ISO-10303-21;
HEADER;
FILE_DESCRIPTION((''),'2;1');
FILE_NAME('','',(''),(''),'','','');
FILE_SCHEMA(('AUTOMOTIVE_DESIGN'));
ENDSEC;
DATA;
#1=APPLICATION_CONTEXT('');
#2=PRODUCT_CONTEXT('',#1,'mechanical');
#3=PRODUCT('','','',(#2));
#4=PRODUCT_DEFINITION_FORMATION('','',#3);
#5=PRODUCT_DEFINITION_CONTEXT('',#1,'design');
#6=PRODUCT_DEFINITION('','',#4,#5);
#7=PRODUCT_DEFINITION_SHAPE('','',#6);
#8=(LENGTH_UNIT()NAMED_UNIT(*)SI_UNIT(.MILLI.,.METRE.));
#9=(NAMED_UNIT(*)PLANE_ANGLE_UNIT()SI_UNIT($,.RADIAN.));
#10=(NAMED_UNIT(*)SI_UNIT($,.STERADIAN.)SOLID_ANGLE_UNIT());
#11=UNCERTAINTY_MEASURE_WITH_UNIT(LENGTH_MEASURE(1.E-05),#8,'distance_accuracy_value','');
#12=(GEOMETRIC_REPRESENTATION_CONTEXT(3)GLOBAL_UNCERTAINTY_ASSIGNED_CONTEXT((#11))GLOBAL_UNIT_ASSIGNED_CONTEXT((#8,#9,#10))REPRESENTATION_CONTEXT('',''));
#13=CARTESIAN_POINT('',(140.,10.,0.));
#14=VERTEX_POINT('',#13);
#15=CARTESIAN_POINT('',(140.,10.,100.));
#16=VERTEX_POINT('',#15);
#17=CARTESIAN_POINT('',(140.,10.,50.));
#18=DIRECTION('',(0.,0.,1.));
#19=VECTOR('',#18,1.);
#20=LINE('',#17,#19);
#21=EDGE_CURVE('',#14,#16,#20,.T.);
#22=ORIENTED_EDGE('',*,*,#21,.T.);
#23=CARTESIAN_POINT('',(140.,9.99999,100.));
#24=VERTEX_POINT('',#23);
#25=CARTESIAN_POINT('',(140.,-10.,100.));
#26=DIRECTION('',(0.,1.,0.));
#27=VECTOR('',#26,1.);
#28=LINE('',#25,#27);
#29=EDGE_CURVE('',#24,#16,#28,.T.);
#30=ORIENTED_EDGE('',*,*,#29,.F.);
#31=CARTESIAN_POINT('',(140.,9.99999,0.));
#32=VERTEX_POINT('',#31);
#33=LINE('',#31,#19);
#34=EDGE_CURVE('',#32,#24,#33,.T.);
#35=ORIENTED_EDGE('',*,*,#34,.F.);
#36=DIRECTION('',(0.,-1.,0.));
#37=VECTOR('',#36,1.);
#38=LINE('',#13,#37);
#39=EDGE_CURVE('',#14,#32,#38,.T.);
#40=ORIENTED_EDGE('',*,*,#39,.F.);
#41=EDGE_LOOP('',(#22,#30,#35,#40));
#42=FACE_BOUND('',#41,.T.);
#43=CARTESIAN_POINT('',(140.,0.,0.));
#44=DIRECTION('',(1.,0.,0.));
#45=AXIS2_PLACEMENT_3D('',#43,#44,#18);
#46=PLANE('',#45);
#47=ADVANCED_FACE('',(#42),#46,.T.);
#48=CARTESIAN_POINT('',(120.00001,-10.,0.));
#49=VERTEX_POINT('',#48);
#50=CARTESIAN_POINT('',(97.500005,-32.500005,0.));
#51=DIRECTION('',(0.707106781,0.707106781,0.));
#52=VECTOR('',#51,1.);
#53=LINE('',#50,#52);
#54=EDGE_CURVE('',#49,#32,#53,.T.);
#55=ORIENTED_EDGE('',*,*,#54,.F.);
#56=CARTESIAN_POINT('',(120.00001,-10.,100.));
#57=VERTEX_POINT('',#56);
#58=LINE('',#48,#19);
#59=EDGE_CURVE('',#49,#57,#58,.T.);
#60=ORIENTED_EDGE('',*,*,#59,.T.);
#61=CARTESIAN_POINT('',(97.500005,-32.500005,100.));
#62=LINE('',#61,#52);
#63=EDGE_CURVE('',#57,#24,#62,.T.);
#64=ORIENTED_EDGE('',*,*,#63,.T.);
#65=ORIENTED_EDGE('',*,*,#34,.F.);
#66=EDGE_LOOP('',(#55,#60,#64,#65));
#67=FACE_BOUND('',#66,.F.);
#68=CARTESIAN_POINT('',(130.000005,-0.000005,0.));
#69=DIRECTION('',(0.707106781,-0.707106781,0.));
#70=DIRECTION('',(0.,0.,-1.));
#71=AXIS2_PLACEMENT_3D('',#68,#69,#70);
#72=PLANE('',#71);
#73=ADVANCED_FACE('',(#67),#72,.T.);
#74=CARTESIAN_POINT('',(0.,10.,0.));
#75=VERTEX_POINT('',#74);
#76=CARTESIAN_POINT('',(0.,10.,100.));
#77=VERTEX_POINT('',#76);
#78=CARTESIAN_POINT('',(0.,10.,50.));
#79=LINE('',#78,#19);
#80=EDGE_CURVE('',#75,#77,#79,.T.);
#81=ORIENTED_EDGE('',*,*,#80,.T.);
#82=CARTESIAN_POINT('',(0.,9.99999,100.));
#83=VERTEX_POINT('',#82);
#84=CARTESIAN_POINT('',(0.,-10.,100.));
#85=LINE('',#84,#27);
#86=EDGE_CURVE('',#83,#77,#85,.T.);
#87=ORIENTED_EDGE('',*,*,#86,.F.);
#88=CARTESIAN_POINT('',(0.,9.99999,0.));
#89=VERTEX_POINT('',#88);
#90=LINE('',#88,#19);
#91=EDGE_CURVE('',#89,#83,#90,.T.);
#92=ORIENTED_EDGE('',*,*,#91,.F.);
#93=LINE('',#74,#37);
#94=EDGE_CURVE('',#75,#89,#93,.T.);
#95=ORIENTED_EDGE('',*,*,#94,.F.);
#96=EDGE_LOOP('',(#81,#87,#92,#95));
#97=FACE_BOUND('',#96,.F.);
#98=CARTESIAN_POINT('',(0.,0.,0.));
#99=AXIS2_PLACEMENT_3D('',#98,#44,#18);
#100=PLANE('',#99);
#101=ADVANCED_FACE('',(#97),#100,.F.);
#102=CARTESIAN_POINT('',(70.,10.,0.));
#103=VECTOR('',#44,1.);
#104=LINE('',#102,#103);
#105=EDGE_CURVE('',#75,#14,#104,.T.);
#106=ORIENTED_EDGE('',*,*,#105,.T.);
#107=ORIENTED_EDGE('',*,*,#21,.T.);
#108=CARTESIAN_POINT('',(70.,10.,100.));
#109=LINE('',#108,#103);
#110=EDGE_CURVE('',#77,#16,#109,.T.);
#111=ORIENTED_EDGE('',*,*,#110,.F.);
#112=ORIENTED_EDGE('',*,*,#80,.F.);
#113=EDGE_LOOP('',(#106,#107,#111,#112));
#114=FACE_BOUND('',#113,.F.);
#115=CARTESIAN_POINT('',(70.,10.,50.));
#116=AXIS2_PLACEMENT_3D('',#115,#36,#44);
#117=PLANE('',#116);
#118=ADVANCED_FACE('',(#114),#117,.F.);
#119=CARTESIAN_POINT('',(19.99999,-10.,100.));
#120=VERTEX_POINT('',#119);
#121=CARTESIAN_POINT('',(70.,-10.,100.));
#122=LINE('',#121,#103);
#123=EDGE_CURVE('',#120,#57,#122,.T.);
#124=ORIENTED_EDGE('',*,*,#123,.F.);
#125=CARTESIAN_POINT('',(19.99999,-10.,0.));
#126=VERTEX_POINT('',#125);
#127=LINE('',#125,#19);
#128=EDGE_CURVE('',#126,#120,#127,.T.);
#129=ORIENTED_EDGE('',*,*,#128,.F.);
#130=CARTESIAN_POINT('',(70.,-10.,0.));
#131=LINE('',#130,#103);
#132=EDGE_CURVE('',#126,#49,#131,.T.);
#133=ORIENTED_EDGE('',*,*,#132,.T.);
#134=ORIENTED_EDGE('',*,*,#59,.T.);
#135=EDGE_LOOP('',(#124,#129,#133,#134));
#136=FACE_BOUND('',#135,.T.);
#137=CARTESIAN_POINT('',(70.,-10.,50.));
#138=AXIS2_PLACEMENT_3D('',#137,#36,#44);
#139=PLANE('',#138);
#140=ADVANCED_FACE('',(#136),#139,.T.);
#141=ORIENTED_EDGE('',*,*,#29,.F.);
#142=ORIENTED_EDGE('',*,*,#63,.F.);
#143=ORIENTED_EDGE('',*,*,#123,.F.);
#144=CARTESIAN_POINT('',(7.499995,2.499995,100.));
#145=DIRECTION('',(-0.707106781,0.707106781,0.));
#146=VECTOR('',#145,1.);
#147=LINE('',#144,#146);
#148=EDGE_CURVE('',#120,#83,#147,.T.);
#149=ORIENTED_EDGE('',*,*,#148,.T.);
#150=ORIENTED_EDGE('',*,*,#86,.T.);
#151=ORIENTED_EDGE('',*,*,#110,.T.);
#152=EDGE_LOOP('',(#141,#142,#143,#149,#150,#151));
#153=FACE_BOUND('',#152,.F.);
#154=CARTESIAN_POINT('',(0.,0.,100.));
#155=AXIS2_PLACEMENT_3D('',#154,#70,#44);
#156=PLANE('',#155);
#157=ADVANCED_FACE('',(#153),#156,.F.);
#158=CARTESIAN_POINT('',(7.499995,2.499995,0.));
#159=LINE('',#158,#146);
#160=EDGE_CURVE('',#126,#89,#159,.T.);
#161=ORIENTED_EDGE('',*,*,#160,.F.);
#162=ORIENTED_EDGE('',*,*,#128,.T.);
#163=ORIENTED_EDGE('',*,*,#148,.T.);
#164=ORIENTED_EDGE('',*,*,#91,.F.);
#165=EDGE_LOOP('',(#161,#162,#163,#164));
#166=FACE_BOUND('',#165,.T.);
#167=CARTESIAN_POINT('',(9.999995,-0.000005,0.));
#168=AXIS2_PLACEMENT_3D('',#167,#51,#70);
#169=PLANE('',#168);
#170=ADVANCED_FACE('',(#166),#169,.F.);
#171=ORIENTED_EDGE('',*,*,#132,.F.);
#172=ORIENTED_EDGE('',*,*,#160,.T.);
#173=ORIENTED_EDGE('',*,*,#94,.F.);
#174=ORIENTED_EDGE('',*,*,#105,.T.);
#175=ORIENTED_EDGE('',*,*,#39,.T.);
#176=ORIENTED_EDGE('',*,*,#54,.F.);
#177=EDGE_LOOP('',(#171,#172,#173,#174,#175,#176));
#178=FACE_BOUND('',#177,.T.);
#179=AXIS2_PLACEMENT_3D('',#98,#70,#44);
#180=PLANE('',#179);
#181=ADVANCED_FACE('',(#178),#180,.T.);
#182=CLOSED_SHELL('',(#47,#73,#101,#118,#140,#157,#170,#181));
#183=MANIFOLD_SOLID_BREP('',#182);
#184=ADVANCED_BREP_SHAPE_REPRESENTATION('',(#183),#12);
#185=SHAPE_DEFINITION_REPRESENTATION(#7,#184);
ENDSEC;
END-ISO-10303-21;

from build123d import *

# Parameters (mm, degrees)
F0_W     = 140
F0_H     = 100
F1_DEPTH = 10
F2_SIZE2 = 19.99999
F2_SIZE  = 19.99999
F3_SIZE2 = 19.99999
F3_SIZE  = 19.99999


# Not quite as in the source:
# - a fillet or chamfer is up to 0.001 mm smaller than in the source, because OpenCascade refuses the exact size


with BuildPart() as f1:
    # F0 (on Front) → F1 (new body, symmetric)
    with BuildSketch(Plane.XZ):
        with Locations((70, 50)):
            Rectangle(F0_W, F0_H)
    extrude(amount=F1_DEPTH, both=True)

    # F2 (size 20 and 20 in the source; OpenCascade refuses exactly that, so slightly less here)
    f2_edges = [f1.edges().sort_by_distance(p)[0] for p in [
        (140, -10, 50),
    ]]
    chamfer(f2_edges, length=F2_SIZE, length2=F2_SIZE2)

    # F3 (size 20 and 20 in the source; OpenCascade refuses exactly that, so slightly less here)
    f3_edges = [f1.edges().sort_by_distance(p)[0] for p in [
        (0, -10, 50),
    ]]
    chamfer(f3_edges, length=F3_SIZE, length2=F3_SIZE2)


solid = f1.part
